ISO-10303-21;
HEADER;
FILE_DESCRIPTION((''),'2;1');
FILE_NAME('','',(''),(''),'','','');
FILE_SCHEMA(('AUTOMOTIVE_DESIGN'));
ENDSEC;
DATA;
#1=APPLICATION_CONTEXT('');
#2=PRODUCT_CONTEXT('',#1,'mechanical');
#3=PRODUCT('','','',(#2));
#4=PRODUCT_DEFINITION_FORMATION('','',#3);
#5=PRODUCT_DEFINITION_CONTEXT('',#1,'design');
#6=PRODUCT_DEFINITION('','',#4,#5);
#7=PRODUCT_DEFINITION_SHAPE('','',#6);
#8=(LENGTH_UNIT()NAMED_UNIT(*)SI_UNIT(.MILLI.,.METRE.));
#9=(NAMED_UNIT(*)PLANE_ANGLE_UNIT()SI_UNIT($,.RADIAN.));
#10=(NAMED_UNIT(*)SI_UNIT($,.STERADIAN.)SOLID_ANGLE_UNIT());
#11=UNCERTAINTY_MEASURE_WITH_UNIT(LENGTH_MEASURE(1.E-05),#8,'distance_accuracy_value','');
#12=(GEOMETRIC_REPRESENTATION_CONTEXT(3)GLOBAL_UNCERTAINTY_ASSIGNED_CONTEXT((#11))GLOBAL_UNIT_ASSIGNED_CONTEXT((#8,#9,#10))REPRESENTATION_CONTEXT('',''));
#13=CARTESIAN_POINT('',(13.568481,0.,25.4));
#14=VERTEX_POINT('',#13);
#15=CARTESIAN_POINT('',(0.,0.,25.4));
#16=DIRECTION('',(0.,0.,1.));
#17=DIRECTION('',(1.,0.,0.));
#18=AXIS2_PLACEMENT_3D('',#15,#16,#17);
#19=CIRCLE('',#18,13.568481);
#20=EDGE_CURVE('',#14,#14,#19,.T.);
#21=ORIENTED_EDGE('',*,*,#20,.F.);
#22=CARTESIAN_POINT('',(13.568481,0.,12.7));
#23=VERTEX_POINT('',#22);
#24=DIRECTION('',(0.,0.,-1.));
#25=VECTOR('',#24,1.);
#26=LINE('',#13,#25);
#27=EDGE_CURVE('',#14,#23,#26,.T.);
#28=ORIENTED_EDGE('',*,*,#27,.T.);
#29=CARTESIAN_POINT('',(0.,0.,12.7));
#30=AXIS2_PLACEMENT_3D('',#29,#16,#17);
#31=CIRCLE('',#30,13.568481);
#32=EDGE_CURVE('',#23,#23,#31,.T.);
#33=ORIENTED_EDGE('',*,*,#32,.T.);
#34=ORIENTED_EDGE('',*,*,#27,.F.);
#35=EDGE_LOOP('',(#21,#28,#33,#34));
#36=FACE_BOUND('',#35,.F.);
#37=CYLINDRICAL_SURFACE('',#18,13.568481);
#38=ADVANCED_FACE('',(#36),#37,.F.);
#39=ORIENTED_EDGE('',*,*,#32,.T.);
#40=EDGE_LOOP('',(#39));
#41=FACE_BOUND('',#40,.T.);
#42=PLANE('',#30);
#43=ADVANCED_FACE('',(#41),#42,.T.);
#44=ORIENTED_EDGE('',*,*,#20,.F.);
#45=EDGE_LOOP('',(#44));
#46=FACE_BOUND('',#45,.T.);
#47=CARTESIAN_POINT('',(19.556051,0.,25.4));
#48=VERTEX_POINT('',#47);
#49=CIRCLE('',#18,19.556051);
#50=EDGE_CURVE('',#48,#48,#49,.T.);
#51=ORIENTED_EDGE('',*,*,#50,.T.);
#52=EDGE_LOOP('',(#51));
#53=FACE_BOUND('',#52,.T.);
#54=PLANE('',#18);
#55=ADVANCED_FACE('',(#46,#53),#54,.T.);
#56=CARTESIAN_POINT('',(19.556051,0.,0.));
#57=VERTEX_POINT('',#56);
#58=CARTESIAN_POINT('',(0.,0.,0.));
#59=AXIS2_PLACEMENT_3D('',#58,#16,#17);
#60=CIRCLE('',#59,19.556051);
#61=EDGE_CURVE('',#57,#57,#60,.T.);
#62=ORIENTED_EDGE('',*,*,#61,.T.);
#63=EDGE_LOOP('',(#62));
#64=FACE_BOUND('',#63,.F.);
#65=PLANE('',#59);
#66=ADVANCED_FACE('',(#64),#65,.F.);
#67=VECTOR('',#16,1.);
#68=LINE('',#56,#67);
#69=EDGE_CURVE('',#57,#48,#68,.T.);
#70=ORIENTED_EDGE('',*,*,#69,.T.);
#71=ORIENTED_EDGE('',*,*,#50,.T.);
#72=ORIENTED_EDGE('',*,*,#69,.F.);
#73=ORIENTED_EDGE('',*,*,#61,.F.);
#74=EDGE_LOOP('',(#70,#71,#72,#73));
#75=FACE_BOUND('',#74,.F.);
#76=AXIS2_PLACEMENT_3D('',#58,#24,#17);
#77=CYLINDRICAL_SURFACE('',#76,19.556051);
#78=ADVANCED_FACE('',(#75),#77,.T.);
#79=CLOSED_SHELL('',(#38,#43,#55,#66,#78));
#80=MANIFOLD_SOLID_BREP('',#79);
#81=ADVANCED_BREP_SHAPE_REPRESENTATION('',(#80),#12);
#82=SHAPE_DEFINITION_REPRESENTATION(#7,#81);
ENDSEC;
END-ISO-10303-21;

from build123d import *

# Parameters (mm, degrees)
F0_R     = 19.5560512616
F1_DEPTH = 25.4
F5_R     = 13.568481042
F6_DEPTH = 12.7


# Not quite as in the source:
# - the program builds the solid bodies; features that only make, move or delete a surface that nothing else refers to are left out


with BuildPart() as f1:
    # F0 (on Top) → F1 (new body)
    with BuildSketch(Plane.XY):
        Circle(F0_R)
    extrude(amount=F1_DEPTH)

    # F5 (on face) → F6 (cut)
    with BuildSketch(Plane.XY.offset(25.4)):
        Circle(F5_R)
    extrude(amount=-F6_DEPTH, mode=Mode.SUBTRACT)


solid = f1.part
